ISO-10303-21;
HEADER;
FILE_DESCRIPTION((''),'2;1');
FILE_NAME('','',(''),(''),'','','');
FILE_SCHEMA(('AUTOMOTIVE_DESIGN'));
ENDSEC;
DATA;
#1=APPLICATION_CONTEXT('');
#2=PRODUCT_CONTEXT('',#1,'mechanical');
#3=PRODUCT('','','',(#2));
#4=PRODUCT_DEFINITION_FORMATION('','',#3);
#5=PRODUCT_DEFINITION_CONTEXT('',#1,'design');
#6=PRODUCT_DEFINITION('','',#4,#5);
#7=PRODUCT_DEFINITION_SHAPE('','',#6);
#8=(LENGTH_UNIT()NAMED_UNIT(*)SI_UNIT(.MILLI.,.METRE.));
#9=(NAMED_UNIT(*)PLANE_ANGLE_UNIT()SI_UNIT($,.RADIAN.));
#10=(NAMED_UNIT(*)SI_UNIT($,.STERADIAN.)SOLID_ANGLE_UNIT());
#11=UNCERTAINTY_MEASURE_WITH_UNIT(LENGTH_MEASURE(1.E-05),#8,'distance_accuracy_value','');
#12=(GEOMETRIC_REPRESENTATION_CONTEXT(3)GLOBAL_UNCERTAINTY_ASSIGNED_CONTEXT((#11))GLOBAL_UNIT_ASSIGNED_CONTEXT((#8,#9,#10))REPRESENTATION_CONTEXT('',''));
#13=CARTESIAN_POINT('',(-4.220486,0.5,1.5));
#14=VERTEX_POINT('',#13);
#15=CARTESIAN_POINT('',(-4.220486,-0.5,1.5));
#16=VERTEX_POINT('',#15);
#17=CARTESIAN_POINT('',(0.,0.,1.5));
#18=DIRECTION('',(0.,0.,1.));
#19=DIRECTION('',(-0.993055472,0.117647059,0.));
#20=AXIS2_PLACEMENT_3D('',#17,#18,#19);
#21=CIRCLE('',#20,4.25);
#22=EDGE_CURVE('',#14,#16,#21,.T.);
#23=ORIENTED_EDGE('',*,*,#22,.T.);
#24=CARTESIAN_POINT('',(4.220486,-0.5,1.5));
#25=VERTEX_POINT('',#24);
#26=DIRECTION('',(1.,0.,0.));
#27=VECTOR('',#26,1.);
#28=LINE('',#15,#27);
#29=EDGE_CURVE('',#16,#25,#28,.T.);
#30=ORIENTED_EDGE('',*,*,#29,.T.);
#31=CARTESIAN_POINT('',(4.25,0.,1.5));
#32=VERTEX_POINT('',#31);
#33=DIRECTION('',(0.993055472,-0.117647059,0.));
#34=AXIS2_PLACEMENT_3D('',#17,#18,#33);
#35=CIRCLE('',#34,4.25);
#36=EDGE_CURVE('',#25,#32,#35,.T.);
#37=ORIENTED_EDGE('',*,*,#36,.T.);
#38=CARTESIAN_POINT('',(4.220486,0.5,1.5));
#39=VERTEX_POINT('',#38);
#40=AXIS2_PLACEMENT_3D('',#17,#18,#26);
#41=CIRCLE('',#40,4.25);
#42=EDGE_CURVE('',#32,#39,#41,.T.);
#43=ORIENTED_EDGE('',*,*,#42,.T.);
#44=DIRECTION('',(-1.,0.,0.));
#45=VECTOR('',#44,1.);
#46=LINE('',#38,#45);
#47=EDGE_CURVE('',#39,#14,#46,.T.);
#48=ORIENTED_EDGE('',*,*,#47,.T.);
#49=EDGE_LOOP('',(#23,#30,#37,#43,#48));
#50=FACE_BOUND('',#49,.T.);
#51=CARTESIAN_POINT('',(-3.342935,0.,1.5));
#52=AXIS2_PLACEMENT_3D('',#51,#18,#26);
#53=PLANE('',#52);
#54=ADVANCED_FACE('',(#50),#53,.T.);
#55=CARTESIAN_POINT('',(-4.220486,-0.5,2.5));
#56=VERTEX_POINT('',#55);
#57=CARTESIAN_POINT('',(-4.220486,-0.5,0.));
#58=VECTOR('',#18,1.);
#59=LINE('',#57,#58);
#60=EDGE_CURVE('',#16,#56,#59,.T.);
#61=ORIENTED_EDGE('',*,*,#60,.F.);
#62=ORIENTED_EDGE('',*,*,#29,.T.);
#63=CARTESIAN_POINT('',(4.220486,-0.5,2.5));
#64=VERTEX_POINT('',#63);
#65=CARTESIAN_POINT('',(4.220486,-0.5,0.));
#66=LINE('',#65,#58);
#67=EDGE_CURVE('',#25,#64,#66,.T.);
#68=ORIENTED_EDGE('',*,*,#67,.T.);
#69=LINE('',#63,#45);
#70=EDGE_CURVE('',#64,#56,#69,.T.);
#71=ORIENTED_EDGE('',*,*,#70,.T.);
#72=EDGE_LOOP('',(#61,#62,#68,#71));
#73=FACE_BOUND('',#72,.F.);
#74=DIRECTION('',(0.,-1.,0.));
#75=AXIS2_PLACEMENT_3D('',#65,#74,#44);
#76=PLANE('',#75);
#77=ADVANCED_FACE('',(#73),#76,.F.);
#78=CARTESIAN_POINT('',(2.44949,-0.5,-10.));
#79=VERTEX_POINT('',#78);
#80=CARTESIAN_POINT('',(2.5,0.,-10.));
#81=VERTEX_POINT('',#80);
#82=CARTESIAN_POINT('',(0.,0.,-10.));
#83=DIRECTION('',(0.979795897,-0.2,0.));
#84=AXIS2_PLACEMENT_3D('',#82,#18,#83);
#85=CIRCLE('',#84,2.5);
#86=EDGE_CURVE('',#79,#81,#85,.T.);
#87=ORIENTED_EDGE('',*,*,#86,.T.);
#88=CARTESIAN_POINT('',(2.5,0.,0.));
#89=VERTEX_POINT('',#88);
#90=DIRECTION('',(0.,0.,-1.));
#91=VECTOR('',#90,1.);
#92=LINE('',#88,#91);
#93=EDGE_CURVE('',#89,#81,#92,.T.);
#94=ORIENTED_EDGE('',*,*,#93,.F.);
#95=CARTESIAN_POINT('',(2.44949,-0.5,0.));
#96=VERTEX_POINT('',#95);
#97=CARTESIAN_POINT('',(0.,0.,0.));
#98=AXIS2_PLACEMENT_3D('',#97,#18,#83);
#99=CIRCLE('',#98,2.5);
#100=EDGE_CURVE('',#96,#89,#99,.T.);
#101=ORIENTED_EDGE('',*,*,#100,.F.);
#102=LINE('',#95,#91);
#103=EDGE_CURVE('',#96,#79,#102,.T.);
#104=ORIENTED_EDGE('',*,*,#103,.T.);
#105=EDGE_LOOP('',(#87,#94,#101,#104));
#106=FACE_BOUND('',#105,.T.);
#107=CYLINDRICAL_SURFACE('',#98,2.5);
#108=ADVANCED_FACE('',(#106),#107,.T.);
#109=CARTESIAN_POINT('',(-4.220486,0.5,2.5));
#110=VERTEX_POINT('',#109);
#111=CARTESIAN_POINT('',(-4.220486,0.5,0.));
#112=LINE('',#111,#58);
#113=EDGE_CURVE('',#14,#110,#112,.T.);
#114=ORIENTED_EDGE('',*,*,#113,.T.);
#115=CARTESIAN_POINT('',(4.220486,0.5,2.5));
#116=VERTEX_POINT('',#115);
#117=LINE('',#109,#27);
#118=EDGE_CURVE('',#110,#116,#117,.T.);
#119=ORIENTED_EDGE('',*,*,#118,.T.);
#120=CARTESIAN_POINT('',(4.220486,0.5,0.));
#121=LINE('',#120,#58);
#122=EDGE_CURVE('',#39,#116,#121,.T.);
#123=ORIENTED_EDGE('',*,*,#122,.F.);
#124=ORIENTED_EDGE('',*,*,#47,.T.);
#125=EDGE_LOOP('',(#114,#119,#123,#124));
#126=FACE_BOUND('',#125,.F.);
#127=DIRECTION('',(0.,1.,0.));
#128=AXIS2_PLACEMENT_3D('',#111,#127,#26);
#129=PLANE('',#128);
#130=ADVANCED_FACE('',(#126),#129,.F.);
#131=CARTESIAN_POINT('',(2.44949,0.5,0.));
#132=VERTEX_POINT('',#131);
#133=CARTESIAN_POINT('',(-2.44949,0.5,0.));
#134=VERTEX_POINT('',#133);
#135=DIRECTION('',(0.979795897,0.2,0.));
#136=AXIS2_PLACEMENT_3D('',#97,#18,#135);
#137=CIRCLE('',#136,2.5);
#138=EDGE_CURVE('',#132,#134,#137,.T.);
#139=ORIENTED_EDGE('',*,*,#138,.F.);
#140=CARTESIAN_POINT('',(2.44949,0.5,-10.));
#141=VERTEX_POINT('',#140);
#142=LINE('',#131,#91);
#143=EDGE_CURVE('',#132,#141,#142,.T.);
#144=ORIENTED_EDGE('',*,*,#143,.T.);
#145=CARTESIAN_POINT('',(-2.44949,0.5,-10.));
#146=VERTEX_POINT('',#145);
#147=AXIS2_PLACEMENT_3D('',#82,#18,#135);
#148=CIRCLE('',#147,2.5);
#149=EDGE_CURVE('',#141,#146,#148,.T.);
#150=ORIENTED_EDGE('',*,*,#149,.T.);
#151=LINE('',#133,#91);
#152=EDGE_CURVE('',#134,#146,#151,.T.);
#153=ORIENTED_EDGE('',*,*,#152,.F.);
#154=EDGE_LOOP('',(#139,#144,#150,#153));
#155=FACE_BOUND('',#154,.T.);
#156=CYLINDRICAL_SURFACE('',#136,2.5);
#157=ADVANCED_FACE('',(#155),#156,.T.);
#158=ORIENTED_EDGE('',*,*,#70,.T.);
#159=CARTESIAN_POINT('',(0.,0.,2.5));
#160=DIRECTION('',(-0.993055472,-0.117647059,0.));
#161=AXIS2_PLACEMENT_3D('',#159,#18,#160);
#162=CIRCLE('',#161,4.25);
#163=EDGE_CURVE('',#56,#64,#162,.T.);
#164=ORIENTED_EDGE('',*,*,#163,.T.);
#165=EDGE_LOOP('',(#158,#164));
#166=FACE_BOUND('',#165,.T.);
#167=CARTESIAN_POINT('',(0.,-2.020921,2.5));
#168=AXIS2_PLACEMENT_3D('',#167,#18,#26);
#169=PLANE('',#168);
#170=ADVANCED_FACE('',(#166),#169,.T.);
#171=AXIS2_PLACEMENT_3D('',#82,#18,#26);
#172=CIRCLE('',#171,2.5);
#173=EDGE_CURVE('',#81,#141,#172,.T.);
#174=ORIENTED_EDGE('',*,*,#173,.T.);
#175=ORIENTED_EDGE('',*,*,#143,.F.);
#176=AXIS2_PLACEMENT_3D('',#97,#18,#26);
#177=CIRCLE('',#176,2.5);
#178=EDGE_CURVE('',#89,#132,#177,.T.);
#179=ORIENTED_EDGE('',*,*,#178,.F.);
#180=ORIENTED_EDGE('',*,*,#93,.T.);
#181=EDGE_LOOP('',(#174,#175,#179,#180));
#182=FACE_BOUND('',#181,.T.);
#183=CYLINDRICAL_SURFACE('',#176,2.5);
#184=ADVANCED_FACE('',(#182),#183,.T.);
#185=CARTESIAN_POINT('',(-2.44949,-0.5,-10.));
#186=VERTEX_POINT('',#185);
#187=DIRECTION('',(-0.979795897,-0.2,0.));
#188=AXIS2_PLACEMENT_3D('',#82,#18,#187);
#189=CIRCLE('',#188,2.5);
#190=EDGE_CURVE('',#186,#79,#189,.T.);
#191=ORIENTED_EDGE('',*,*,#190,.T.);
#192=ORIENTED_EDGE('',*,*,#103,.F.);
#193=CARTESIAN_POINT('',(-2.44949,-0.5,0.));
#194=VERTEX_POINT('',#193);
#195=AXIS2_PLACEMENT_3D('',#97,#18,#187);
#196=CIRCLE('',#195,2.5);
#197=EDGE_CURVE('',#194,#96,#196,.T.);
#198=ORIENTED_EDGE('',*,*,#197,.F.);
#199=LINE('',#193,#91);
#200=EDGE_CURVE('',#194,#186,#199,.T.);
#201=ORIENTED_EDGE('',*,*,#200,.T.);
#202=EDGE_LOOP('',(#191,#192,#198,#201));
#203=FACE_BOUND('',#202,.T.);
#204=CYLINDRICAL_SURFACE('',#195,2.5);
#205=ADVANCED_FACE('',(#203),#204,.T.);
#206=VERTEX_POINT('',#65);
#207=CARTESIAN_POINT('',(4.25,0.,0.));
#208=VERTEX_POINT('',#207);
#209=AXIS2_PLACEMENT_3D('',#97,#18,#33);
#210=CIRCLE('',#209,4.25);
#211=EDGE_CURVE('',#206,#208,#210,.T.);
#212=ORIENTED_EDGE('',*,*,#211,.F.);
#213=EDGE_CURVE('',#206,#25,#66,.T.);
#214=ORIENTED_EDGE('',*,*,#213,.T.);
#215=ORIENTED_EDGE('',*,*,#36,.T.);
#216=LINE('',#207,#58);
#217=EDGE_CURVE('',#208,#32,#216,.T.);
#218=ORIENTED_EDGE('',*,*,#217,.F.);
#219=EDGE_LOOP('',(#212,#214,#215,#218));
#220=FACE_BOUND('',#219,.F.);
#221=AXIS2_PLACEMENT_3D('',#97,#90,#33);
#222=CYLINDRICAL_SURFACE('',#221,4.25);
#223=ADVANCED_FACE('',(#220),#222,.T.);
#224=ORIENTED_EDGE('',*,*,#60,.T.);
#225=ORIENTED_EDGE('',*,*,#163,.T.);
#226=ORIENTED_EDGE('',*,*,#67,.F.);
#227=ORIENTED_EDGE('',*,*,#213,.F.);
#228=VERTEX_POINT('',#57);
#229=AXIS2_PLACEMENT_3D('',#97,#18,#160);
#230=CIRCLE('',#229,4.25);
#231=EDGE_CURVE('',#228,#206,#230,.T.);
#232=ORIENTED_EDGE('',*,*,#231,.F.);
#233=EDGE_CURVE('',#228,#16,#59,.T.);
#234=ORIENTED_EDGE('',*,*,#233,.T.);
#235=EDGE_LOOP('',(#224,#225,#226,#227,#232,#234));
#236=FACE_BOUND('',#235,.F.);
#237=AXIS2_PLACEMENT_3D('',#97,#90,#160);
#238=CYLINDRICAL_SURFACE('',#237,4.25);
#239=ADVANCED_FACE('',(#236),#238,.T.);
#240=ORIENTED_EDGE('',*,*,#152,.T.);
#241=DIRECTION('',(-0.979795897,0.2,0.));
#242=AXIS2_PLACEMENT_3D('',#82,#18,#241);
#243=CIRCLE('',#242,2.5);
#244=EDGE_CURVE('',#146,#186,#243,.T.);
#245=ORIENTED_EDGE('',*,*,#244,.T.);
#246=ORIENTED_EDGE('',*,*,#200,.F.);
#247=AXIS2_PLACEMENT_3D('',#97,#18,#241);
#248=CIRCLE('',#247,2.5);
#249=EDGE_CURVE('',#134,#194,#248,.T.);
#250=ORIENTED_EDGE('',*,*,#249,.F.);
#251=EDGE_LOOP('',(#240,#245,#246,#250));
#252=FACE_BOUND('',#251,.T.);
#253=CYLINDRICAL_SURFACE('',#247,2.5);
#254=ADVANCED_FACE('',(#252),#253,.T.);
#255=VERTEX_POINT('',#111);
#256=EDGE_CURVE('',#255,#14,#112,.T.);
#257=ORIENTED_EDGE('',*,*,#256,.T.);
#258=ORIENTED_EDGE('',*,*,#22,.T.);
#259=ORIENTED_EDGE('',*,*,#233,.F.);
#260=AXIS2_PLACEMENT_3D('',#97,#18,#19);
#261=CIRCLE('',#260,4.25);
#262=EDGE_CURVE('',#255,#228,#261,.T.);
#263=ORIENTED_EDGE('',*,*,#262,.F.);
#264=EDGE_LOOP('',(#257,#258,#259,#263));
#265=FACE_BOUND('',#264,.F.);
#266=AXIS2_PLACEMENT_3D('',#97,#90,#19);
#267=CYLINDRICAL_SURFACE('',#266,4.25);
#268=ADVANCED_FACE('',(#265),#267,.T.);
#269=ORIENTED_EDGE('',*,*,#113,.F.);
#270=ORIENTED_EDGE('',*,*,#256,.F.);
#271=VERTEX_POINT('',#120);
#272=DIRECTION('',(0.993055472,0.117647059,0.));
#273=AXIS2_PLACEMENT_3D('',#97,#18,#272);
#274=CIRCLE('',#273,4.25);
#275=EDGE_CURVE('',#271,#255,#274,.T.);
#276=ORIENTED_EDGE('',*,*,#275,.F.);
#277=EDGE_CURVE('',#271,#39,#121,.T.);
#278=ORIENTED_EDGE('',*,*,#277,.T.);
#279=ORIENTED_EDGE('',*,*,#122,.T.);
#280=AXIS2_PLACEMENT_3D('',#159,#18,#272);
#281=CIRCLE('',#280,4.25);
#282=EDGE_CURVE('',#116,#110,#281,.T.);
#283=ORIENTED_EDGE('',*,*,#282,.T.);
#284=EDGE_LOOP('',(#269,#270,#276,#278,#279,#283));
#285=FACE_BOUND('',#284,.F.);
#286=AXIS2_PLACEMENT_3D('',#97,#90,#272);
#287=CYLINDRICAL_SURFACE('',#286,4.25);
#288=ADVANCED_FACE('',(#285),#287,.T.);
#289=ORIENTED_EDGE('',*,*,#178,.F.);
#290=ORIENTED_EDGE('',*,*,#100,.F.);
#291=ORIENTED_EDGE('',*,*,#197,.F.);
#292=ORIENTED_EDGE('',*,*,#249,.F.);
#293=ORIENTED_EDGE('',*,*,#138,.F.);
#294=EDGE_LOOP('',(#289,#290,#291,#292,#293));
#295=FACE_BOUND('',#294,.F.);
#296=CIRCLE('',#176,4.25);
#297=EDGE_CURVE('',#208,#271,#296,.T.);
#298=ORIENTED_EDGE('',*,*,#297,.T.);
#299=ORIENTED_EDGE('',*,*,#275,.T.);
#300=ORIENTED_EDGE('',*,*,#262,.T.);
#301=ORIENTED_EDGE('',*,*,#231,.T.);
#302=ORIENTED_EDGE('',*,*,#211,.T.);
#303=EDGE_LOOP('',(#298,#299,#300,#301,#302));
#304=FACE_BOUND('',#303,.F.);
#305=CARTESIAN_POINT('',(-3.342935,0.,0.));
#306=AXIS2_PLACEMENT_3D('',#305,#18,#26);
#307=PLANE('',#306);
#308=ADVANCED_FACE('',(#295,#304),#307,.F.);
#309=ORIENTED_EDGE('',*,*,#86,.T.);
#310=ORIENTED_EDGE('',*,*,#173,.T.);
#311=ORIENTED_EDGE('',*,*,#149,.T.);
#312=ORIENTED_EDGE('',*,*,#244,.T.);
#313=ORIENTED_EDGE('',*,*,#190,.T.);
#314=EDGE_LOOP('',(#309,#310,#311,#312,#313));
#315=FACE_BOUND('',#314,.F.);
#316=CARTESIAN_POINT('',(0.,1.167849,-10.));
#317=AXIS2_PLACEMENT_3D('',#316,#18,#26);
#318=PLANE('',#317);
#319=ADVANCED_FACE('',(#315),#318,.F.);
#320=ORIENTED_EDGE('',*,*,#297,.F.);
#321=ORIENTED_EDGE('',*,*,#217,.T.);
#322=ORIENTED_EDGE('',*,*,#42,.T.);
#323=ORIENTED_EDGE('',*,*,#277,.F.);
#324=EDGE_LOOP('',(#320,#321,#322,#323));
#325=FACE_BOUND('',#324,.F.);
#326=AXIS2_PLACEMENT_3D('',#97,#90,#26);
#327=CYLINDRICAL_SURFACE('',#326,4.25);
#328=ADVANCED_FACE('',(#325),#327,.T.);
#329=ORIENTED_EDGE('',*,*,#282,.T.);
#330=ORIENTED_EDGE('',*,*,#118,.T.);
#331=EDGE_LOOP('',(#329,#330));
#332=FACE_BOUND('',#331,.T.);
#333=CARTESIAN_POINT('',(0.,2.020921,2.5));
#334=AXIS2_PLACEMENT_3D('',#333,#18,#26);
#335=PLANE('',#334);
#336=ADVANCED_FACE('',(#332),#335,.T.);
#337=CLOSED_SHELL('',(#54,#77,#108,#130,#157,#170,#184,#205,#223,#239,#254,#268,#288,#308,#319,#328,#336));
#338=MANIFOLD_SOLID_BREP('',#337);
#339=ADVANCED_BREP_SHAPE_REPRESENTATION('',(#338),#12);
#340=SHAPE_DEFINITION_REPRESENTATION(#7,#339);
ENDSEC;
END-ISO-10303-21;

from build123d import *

# Parameters (mm, degrees)
F1_DEPTH = 10
F2_DEPTH = 2.5
F3_DEPTH = 1.5


# Not quite as in the source:
# - a feature names something its author has since deleted; it is built from what else it names


with BuildPart() as f1:
    # F0 (on Top) → F1 (new body)
    with BuildSketch(Plane.XY):
        with BuildLine():
            Line((-2.4494897428, 0.5), (2.4494897428, 0.5))
            ThreePointArc((2.4494897428, 0.5), (0, 2.5), (-2.4494897428, 0.5))
        make_face()
        with BuildLine():
            ThreePointArc((2.5, 0), (2.4873403825, 0.251272405), (2.4494897428, 0.5))
            Line((2.4494897428, 0.5), (-2.4494897428, 0.5))
            ThreePointArc((-2.4494897428, 0.5), (-2.5, 0), (-2.4494897428, -0.5))
            Line((-2.4494897428, -0.5), (2.4494897428, -0.5))
            ThreePointArc((2.4494897428, -0.5), (2.4873403825, -0.251272405), (2.5, 0))
        make_face()
        with BuildLine():
            ThreePointArc((-2.4494897428, -0.5), (0, -2.5), (2.4494897428, -0.5))
            Line((2.4494897428, -0.5), (-2.4494897428, -0.5))
        make_face()
    extrude(amount=-F1_DEPTH)

    # F0 (on Top) → F2 (join)
    with BuildSketch(Plane.XY):
        with BuildLine():
            ThreePointArc((-4.220485754, -0.5), (0, -4.25), (4.220485754, -0.5))
            Line((4.220485754, -0.5), (2.4494897428, -0.5))
            ThreePointArc((2.4494897428, -0.5), (0, -2.5), (-2.4494897428, -0.5))
            Line((-2.4494897428, -0.5), (-4.220485754, -0.5))
        make_face()
        with BuildLine():
            Line((2.4494897428, 0.5), (4.220485754, 0.5))
            ThreePointArc((4.220485754, 0.5), (0, 4.25), (-4.220485754, 0.5))
            Line((-4.220485754, 0.5), (-2.4494897428, 0.5))
            ThreePointArc((-2.4494897428, 0.5), (0, 2.5), (2.4494897428, 0.5))
        make_face()
        with BuildLine():
            Line((-2.4494897428, 0.5), (2.4494897428, 0.5))
            ThreePointArc((2.4494897428, 0.5), (0, 2.5), (-2.4494897428, 0.5))
        make_face()
        with BuildLine():
            ThreePointArc((-2.4494897428, -0.5), (0, -2.5), (2.4494897428, -0.5))
            Line((2.4494897428, -0.5), (-2.4494897428, -0.5))
        make_face()
    extrude(amount=F2_DEPTH)

    # F0 (on Top) → F3 (join)
    with BuildSketch(Plane.XY):
        with BuildLine():
            Line((-2.4494897428, 0.5), (-4.220485754, 0.5))
            ThreePointArc((-4.220485754, 0.5), (-4.25, 0), (-4.220485754, -0.5))
            Line((-4.220485754, -0.5), (-2.4494897428, -0.5))
            ThreePointArc((-2.4494897428, -0.5), (-2.5, 0), (-2.4494897428, 0.5))
        make_face()
        with BuildLine():
            ThreePointArc((2.5, 0), (2.4873403825, 0.251272405), (2.4494897428, 0.5))
            Line((2.4494897428, 0.5), (-2.4494897428, 0.5))
            ThreePointArc((-2.4494897428, 0.5), (-2.5, 0), (-2.4494897428, -0.5))
            Line((-2.4494897428, -0.5), (2.4494897428, -0.5))
            ThreePointArc((2.4494897428, -0.5), (2.4873403825, -0.251272405), (2.5, 0))
        make_face()
        with BuildLine():
            ThreePointArc((4.220485754, -0.5), (4.2426150223, -0.2504351666), (4.25, 0))
            ThreePointArc((4.25, 0), (4.2426150223, 0.2504351666), (4.220485754, 0.5))
            Line((4.220485754, 0.5), (2.4494897428, 0.5))
            ThreePointArc((2.4494897428, 0.5), (2.4873403825, 0.251272405), (2.5, 0))
            ThreePointArc((2.5, 0), (2.4873403825, -0.251272405), (2.4494897428, -0.5))
            Line((2.4494897428, -0.5), (4.220485754, -0.5))
        make_face()
    extrude(amount=F3_DEPTH)


solid = f1.part
